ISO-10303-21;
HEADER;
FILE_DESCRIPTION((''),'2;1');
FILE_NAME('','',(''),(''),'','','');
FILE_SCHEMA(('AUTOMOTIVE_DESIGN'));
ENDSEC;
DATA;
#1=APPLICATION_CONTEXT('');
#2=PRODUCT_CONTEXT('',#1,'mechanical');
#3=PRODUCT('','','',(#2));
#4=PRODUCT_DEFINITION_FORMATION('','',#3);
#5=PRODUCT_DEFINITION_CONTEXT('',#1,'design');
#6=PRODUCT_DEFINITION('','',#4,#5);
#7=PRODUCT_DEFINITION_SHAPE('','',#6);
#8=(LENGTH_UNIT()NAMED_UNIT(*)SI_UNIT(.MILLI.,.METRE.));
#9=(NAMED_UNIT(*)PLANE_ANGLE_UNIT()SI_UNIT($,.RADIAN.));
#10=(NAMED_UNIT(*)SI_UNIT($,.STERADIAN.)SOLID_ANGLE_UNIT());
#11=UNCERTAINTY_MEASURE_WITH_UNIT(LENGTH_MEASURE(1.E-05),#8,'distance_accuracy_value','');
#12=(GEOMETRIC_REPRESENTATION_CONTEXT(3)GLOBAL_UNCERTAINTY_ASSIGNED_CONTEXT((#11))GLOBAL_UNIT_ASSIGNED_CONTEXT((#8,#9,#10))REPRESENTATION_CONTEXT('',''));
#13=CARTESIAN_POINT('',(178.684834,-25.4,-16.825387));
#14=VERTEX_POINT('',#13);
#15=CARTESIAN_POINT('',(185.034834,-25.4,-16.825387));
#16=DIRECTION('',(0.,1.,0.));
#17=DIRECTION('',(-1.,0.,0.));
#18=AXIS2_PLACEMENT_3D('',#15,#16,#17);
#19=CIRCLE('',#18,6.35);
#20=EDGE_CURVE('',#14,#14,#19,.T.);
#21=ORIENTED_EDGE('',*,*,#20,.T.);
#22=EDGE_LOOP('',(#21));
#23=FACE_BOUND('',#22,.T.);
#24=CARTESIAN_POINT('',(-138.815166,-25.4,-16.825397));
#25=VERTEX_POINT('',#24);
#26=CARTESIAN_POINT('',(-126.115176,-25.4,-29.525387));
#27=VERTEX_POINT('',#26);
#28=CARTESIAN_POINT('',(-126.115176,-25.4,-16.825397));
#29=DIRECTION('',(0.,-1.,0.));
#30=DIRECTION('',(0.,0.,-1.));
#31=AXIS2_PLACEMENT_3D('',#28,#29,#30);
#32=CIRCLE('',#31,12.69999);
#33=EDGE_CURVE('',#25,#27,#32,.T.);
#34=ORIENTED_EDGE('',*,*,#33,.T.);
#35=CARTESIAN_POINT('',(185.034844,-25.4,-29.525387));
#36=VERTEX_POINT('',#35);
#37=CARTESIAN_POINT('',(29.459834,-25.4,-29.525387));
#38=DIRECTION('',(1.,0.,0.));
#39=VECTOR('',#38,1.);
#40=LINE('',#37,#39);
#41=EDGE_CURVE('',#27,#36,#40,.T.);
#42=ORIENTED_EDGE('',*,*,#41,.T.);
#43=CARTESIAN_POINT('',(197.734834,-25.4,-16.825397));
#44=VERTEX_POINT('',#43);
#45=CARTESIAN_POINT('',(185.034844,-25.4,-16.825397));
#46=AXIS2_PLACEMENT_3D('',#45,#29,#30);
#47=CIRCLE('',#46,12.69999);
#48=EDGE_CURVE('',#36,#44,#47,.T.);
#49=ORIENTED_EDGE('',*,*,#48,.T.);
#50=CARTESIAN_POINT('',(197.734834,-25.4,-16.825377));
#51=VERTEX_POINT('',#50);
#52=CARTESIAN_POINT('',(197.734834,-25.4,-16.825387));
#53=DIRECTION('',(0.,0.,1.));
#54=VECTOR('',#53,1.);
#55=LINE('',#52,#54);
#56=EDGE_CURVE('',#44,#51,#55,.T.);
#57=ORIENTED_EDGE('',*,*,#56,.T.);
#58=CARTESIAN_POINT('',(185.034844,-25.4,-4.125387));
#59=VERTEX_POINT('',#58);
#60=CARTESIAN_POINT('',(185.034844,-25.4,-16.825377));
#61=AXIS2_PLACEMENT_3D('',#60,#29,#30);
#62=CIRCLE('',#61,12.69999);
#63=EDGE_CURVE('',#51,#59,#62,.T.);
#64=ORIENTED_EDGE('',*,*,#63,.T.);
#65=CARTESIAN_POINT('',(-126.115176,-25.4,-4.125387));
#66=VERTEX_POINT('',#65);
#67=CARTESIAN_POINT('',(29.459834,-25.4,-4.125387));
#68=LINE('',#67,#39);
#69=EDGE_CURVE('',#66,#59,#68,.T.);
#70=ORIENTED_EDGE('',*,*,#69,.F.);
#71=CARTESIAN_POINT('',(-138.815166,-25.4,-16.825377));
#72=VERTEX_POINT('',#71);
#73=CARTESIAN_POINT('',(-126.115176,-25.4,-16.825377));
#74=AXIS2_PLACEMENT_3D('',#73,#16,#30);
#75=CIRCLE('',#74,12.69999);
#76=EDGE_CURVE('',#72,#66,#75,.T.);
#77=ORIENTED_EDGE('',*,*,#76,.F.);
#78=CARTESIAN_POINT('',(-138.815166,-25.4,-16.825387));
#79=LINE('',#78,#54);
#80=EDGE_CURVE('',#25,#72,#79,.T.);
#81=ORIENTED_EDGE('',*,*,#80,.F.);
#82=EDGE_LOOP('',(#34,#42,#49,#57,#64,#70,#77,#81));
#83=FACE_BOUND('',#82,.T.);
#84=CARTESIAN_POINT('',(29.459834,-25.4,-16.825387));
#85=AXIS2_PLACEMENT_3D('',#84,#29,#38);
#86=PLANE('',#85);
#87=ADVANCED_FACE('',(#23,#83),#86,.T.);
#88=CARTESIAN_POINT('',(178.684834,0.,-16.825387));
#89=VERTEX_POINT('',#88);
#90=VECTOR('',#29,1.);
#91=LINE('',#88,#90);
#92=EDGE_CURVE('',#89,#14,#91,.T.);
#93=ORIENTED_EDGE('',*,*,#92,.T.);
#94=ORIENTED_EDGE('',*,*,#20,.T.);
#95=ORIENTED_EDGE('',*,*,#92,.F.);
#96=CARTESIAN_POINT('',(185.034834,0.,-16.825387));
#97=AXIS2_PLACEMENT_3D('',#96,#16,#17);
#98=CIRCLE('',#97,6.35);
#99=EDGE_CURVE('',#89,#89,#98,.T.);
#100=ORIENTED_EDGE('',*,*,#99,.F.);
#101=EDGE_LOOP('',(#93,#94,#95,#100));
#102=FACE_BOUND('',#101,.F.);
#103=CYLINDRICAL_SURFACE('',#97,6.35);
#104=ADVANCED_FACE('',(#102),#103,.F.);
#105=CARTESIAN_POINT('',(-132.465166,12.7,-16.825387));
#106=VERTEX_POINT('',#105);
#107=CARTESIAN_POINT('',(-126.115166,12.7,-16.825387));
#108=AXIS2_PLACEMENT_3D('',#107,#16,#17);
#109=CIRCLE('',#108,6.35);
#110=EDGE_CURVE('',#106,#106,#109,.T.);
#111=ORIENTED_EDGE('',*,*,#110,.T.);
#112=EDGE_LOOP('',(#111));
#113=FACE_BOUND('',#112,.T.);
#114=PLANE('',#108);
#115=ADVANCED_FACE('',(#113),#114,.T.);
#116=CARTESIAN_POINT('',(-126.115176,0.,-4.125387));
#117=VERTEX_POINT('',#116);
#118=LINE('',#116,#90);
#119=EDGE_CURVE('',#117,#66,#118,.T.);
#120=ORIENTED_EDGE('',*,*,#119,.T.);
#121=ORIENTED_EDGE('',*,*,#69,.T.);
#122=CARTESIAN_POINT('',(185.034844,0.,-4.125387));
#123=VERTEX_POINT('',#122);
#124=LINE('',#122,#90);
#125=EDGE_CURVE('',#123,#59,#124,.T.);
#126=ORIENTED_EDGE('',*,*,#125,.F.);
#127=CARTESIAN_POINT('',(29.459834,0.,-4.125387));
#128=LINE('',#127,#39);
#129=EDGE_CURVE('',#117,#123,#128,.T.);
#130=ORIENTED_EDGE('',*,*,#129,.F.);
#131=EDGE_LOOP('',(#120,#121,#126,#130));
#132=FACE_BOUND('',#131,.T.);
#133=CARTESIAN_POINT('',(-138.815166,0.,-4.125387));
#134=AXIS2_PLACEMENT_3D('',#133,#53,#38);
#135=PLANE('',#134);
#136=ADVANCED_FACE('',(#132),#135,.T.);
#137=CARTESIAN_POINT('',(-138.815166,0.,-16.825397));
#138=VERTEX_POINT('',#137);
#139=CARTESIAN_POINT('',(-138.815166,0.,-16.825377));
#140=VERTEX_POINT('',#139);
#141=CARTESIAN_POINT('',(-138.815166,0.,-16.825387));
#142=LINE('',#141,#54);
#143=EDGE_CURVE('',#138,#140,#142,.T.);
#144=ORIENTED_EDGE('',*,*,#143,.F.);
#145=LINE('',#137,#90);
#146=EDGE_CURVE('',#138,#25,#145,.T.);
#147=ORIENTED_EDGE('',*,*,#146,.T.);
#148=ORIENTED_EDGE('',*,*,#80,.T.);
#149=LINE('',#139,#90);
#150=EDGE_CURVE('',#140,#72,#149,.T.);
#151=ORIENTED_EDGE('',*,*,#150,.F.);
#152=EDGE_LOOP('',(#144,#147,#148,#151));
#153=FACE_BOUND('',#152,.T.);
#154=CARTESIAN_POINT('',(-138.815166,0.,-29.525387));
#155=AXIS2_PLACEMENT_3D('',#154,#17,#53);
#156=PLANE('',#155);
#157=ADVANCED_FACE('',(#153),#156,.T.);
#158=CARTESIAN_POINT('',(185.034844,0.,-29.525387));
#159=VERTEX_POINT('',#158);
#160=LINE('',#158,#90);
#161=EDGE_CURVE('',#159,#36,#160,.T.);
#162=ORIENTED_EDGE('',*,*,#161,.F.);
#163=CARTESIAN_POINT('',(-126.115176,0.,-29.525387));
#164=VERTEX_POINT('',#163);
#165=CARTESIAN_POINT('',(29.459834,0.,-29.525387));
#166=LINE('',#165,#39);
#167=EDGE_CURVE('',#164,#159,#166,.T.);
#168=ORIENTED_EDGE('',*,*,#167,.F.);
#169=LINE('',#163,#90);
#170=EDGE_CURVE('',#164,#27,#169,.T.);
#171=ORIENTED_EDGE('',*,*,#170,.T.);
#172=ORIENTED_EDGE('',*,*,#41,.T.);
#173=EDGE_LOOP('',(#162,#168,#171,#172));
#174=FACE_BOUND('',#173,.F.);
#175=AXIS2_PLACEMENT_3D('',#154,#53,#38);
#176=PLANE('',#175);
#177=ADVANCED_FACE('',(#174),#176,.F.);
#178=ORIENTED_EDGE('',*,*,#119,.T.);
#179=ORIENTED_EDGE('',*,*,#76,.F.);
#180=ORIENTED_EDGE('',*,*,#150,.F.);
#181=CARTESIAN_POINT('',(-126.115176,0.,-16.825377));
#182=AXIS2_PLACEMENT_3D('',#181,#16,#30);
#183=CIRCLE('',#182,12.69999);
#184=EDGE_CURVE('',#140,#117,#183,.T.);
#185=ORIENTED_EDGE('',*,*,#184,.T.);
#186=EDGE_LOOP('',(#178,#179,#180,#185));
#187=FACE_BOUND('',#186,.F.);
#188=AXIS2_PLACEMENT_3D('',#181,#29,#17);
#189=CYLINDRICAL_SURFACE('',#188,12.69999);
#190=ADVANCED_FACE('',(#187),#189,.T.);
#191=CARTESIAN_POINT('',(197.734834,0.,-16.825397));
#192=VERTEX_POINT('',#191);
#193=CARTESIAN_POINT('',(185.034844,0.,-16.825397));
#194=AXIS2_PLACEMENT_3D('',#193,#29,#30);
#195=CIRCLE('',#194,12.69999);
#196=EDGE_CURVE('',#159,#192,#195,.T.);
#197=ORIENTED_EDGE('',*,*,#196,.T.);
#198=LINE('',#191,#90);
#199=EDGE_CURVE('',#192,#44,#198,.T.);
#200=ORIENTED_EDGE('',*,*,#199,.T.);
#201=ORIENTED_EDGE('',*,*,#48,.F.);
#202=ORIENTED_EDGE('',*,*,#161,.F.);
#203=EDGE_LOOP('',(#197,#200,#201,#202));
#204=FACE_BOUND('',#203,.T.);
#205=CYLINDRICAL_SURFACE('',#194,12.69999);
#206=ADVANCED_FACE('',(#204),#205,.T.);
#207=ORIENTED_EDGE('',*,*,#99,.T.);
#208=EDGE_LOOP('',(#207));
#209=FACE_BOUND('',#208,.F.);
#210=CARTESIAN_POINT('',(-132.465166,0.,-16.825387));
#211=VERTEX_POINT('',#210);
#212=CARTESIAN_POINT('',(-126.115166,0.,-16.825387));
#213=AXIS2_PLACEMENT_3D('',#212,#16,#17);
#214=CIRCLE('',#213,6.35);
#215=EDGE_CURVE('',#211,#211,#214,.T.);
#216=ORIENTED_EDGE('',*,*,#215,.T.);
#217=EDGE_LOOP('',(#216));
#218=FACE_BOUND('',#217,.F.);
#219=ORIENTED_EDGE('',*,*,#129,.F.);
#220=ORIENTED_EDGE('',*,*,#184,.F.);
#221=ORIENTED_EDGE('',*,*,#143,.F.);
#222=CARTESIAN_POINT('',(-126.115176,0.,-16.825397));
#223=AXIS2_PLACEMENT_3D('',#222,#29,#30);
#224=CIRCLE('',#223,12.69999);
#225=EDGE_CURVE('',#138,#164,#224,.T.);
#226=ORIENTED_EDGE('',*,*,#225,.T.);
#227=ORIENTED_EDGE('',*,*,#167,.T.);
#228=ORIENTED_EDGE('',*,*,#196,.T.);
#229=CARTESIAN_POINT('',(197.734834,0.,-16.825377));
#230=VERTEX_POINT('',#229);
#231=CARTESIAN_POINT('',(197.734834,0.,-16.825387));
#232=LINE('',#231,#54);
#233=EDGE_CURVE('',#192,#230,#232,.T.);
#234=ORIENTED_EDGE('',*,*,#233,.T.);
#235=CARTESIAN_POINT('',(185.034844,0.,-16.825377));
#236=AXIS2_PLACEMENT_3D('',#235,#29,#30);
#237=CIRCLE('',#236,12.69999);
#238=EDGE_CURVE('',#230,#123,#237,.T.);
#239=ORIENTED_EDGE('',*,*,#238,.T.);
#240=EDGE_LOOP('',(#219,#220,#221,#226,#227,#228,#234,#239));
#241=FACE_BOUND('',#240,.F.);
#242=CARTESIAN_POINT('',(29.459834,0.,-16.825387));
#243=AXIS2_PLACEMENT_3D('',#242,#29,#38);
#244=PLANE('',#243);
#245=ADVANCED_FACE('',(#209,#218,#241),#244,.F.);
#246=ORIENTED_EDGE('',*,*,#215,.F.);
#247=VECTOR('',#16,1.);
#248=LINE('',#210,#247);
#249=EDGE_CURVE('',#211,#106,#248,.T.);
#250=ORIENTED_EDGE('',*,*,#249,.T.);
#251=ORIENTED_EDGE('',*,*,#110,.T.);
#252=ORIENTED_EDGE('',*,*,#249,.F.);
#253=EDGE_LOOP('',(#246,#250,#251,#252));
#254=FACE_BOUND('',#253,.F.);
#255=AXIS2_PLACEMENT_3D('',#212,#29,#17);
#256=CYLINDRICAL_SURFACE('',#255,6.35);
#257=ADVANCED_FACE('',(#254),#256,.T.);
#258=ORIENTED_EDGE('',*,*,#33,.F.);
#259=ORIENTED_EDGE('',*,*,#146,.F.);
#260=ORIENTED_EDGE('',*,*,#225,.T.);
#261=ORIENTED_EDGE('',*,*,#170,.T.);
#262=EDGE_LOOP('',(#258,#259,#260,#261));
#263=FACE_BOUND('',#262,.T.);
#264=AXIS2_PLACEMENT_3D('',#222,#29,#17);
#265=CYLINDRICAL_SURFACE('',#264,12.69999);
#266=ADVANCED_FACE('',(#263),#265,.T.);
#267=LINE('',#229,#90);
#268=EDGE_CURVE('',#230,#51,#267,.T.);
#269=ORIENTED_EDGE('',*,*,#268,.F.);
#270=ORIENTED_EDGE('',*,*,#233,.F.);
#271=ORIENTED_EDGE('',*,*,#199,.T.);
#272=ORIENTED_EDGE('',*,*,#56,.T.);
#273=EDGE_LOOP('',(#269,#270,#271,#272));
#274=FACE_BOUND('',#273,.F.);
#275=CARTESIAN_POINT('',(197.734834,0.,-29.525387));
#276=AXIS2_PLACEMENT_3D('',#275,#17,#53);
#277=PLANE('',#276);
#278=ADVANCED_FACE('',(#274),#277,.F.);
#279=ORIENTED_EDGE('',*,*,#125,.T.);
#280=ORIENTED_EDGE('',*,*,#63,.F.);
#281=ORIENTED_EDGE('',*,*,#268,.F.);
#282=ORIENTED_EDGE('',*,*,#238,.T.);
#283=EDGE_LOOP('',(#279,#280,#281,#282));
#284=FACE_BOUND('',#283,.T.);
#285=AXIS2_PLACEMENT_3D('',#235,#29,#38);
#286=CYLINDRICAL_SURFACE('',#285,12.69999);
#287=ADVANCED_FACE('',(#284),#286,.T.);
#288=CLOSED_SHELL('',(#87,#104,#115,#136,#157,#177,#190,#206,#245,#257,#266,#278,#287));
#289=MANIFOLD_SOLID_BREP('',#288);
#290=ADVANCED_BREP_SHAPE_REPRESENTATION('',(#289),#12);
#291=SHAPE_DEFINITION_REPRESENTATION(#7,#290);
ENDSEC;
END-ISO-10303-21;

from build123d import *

# Parameters (mm, degrees)
F0_W     = 336.55
F0_H     = 25.4
F1_DEPTH = 25.4
F2_R     = 12.69999
F3_R     = 6.35
F4_DEPTH = 12.7
F5_R     = 6.35
F6_DEPTH = 25.401


# Not quite as in the source:
# - a fillet or chamfer is up to 0.001 mm smaller than in the source, because OpenCascade refuses the exact size


with BuildPart() as f1:
    # F0 (on Front) → F1 (new body)
    with BuildSketch(Plane.XZ):
        with Locations((29.4598335922, -16.8253869212)):
            Rectangle(F0_W, F0_H)
    extrude(amount=F1_DEPTH)

    # F2 (radius 12.7 in the source; OpenCascade refuses exactly that, so slightly less here)
    f2_edges = [f1.edges().sort_by_distance(p)[0] for p in [
        (-138.815166, -12.7, -4.125387),
        (-138.815166, -12.7, -29.525387),
        (197.734834, -12.7, -29.525387),
        (197.734834, -12.7, -4.125387),
    ]]
    fillet(f2_edges, radius=F2_R)

    # F3 (on face) → F4 (join)
    with BuildSketch(Plane(origin=(0, 0, 0), x_dir=(-1, 0, 0), z_dir=(0, 1, 0))):
        with Locations((126.1151664078, -16.8253869212)):
            Circle(F3_R)
    extrude(amount=F4_DEPTH)

    # F5 (on face) → F6 (cut, through all)
    with BuildSketch(Plane(origin=(0, 0, 0), x_dir=(-1, 0, 0), z_dir=(0, 1, 0))):
        with Locations((-185.0348335922, -16.8253869212)):
            Circle(F5_R)
    extrude(amount=-F6_DEPTH, mode=Mode.SUBTRACT)


solid = f1.part
